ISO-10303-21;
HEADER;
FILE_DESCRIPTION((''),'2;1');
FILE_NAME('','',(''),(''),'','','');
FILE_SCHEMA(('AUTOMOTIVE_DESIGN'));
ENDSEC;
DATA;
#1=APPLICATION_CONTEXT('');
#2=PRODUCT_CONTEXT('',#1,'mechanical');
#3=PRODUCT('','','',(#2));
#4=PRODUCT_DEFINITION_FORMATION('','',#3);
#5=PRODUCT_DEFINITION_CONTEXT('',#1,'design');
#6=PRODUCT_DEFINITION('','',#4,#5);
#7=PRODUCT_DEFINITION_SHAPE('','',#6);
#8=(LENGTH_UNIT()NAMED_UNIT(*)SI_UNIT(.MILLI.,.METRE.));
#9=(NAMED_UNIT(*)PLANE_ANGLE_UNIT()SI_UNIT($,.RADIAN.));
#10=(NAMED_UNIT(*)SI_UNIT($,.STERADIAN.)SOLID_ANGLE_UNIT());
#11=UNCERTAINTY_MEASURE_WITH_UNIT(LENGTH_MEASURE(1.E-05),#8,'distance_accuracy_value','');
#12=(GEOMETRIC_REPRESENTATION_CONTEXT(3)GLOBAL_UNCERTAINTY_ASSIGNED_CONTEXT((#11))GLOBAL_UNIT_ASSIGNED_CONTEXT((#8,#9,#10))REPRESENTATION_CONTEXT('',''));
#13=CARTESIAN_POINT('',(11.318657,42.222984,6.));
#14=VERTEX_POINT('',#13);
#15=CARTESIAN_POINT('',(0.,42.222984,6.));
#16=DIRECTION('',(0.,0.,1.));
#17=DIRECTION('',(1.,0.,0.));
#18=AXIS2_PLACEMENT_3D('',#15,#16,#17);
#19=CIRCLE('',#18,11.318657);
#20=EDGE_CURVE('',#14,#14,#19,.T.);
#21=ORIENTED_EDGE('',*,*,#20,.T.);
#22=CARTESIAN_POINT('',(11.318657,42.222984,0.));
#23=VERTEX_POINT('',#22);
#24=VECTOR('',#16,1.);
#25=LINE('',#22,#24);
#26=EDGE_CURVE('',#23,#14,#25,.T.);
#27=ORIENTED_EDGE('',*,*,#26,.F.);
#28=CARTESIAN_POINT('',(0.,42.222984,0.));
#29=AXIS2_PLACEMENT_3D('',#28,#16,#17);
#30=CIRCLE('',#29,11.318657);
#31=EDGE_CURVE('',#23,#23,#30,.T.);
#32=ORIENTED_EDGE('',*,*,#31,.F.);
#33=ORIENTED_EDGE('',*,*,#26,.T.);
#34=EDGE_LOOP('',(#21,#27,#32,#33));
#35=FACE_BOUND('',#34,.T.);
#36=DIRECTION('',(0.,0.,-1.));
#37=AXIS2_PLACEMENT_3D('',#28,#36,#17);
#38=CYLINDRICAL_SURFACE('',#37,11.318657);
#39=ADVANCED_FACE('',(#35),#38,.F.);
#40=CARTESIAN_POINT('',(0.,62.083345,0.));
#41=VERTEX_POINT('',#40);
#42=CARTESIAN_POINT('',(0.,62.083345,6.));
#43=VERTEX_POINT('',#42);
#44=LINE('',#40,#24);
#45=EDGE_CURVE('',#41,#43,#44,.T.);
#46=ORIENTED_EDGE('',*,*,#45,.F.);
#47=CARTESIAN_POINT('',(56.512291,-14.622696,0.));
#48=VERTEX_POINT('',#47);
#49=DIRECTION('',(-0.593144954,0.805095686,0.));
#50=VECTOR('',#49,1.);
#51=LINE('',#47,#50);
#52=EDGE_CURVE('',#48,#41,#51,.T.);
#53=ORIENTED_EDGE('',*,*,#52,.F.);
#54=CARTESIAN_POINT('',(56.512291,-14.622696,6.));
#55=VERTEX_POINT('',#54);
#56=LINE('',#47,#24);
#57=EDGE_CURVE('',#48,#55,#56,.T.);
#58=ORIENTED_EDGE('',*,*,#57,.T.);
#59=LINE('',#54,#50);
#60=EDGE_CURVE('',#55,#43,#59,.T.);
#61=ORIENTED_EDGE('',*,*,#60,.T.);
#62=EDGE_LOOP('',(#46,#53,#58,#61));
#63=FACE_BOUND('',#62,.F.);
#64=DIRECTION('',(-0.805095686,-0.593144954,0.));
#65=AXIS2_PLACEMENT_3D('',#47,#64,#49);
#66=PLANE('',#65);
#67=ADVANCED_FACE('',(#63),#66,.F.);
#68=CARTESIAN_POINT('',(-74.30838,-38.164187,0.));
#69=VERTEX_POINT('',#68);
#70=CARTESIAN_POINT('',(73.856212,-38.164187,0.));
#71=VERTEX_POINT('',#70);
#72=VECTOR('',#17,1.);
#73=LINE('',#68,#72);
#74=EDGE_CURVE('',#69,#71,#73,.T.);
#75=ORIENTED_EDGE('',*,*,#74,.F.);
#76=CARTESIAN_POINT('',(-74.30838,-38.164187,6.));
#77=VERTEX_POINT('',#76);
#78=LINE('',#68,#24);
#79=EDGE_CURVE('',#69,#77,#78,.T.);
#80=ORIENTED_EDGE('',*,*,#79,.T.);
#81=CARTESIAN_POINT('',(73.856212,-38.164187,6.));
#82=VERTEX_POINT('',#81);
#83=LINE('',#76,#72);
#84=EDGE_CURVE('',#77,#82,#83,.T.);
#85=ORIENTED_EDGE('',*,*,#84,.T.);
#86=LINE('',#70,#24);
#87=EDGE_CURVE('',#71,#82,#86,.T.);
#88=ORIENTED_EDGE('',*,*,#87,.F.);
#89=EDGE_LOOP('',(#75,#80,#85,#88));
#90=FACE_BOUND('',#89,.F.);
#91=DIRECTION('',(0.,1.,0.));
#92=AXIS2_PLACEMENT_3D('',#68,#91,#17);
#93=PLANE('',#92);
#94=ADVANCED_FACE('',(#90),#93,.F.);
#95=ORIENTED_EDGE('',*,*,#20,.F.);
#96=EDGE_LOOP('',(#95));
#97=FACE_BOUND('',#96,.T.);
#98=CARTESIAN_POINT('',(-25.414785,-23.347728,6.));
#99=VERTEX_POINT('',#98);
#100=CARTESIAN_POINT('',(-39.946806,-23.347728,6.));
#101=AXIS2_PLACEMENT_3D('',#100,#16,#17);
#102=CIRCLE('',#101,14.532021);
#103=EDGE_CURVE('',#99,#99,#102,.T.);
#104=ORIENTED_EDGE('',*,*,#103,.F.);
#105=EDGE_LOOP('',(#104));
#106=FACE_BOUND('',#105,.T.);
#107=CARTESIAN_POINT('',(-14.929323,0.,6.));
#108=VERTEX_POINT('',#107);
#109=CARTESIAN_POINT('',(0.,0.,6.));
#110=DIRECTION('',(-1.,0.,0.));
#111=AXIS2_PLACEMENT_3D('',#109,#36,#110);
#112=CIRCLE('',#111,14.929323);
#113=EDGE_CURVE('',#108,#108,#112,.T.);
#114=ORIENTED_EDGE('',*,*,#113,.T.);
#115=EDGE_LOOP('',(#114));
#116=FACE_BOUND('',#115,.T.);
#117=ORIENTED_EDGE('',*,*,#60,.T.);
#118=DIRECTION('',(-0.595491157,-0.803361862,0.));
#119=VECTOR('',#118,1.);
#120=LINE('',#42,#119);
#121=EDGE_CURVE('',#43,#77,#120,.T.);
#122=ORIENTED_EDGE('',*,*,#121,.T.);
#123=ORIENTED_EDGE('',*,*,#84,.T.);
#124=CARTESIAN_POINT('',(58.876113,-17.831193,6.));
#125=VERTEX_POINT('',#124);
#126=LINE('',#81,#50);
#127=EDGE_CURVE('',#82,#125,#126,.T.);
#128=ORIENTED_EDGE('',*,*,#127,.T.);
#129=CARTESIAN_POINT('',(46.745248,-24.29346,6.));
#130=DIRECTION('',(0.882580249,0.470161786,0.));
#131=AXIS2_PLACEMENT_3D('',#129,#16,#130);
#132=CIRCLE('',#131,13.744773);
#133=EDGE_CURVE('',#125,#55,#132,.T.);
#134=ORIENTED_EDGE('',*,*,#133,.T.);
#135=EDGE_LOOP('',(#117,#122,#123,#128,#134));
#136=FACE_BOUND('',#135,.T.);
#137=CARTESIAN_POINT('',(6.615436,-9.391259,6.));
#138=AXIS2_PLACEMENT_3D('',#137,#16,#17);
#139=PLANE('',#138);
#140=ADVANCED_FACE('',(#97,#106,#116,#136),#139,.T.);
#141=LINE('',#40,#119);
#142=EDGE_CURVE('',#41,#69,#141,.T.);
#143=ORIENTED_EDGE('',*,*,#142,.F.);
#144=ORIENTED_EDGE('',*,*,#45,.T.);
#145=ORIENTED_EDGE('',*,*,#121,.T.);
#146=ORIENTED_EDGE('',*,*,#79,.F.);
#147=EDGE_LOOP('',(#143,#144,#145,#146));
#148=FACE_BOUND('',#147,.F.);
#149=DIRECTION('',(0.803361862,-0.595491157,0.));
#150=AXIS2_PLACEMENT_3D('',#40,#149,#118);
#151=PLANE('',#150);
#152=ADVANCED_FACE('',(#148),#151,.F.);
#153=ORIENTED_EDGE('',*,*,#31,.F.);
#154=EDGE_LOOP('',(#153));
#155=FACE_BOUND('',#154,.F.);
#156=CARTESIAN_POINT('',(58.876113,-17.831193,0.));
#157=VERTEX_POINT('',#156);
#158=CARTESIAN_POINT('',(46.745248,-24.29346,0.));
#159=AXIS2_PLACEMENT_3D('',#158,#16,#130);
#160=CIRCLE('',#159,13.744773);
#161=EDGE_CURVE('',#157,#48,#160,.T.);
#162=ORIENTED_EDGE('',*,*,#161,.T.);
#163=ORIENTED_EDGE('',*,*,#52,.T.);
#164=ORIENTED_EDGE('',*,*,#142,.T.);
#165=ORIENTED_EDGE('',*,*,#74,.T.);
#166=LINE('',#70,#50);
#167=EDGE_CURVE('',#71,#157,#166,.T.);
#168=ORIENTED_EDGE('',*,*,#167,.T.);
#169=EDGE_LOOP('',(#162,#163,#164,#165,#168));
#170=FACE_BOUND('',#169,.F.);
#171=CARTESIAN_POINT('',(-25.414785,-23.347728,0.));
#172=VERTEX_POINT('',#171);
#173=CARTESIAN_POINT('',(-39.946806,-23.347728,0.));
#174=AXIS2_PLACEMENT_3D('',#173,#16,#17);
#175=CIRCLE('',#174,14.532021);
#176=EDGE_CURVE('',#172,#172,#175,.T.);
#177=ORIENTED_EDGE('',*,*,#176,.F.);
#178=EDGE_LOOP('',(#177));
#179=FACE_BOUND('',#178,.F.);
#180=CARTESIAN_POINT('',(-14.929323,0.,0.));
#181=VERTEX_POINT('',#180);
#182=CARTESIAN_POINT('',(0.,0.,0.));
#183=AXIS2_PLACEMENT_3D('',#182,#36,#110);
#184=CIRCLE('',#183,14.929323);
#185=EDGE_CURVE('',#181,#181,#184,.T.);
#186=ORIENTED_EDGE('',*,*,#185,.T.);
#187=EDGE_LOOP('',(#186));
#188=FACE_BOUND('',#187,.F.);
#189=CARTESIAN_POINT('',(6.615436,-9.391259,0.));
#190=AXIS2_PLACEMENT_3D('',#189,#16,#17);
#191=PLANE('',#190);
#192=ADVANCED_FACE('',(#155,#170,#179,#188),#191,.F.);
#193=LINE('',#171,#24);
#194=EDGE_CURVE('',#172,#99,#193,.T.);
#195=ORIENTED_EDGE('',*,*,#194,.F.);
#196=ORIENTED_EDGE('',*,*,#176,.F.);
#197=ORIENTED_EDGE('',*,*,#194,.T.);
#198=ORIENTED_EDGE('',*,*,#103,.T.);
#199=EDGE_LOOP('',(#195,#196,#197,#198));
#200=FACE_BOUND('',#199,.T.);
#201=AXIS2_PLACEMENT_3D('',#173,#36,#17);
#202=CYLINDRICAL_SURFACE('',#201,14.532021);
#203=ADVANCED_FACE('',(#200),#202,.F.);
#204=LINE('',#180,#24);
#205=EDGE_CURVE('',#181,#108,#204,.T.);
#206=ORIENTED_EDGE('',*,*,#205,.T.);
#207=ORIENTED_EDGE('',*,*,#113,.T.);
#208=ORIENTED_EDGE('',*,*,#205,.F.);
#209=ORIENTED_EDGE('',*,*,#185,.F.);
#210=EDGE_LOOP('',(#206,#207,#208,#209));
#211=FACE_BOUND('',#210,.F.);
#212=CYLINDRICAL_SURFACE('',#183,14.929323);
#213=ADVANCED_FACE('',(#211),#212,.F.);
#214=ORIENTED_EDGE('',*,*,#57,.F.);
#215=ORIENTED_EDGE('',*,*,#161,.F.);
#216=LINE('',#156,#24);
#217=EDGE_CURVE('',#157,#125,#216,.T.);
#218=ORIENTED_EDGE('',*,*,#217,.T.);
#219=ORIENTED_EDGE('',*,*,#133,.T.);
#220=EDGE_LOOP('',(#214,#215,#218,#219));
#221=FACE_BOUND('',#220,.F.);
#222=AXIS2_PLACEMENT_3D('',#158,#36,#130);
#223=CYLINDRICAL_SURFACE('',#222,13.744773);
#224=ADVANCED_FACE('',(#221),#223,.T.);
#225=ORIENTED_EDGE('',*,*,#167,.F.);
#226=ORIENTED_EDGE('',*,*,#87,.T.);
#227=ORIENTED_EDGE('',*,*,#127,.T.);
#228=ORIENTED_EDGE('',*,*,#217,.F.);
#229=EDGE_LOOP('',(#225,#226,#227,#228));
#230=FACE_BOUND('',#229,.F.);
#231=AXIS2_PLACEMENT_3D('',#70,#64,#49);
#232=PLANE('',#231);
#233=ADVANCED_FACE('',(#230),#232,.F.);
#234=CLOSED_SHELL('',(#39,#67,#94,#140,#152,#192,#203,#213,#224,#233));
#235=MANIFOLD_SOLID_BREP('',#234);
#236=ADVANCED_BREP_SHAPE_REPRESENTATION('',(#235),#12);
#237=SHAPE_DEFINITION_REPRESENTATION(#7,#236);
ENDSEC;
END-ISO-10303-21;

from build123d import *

# Parameters (mm, degrees)
F0_R     = 14.5320210998
F0_R_2   = 11.3186574679
F1_DEPTH = 6


# Not quite as in the source:
# - the program builds the solid bodies; features that only make, move or delete a surface that nothing else refers to are left out


with BuildPart() as f1:
    # F0 (on Top) → F1 (new body)
    with BuildSketch(Plane.XY):
        with BuildLine():
            Line((0, 62.0833449066), (-46.019215806, 0))
            Line((-46.019215806, 0), (-74.3083804846, -38.1641872227))
            Line((-74.3083804846, -38.1641872227), (73.8562121987, -38.1641872227))
            Line((73.8562121987, -38.1641872227), (58.8761133365, -17.8311929182))
            ThreePointArc((58.8761133365, -17.8311929182), (60.0804416969, -20.9630848338), (60.4900211693, -24.2934599519))
            ThreePointArc((60.4900211693, -24.2934599519), (34.0337461373, -29.5218920802), (56.5122905135, -14.6226963362))
            Line((56.5122905135, -14.6226963362), (0, 62.0833449066))
        make_face()
        with Locations((-39.9468056858, -23.3477279544)):
            Circle(F0_R, mode=Mode.SUBTRACT)
        with BuildLine():
            ThreePointArc((14.9293226936, 0), (0, -14.9293226936), (-14.9293226936, 0))
            ThreePointArc((-14.9293226936, 0), (0, 14.9293226936), (14.9293226936, 0))
        make_face(mode=Mode.SUBTRACT)
        with Locations((0, 42.2229841352)):
            Circle(F0_R_2, mode=Mode.SUBTRACT)
        with BuildLine():
            ThreePointArc((58.8761133365, -17.8311929182), (57.8111056109, -16.140817186), (56.5122905135, -14.6226963362))
            Line((56.5122905135, -14.6226963362), (58.8761133365, -17.8311929182))
        make_face()
        with BuildLine():
            Line((58.8761133365, -17.8311929182), (56.5122905135, -14.6226963362))
            ThreePointArc((56.5122905135, -14.6226963362), (34.0337461373, -29.5218920802), (60.4900211693, -24.2934599519))
            ThreePointArc((60.4900211693, -24.2934599519), (60.0804416969, -20.9630848338), (58.8761133365, -17.8311929182))
        make_face()
    extrude(amount=F1_DEPTH)


solid = f1.part
